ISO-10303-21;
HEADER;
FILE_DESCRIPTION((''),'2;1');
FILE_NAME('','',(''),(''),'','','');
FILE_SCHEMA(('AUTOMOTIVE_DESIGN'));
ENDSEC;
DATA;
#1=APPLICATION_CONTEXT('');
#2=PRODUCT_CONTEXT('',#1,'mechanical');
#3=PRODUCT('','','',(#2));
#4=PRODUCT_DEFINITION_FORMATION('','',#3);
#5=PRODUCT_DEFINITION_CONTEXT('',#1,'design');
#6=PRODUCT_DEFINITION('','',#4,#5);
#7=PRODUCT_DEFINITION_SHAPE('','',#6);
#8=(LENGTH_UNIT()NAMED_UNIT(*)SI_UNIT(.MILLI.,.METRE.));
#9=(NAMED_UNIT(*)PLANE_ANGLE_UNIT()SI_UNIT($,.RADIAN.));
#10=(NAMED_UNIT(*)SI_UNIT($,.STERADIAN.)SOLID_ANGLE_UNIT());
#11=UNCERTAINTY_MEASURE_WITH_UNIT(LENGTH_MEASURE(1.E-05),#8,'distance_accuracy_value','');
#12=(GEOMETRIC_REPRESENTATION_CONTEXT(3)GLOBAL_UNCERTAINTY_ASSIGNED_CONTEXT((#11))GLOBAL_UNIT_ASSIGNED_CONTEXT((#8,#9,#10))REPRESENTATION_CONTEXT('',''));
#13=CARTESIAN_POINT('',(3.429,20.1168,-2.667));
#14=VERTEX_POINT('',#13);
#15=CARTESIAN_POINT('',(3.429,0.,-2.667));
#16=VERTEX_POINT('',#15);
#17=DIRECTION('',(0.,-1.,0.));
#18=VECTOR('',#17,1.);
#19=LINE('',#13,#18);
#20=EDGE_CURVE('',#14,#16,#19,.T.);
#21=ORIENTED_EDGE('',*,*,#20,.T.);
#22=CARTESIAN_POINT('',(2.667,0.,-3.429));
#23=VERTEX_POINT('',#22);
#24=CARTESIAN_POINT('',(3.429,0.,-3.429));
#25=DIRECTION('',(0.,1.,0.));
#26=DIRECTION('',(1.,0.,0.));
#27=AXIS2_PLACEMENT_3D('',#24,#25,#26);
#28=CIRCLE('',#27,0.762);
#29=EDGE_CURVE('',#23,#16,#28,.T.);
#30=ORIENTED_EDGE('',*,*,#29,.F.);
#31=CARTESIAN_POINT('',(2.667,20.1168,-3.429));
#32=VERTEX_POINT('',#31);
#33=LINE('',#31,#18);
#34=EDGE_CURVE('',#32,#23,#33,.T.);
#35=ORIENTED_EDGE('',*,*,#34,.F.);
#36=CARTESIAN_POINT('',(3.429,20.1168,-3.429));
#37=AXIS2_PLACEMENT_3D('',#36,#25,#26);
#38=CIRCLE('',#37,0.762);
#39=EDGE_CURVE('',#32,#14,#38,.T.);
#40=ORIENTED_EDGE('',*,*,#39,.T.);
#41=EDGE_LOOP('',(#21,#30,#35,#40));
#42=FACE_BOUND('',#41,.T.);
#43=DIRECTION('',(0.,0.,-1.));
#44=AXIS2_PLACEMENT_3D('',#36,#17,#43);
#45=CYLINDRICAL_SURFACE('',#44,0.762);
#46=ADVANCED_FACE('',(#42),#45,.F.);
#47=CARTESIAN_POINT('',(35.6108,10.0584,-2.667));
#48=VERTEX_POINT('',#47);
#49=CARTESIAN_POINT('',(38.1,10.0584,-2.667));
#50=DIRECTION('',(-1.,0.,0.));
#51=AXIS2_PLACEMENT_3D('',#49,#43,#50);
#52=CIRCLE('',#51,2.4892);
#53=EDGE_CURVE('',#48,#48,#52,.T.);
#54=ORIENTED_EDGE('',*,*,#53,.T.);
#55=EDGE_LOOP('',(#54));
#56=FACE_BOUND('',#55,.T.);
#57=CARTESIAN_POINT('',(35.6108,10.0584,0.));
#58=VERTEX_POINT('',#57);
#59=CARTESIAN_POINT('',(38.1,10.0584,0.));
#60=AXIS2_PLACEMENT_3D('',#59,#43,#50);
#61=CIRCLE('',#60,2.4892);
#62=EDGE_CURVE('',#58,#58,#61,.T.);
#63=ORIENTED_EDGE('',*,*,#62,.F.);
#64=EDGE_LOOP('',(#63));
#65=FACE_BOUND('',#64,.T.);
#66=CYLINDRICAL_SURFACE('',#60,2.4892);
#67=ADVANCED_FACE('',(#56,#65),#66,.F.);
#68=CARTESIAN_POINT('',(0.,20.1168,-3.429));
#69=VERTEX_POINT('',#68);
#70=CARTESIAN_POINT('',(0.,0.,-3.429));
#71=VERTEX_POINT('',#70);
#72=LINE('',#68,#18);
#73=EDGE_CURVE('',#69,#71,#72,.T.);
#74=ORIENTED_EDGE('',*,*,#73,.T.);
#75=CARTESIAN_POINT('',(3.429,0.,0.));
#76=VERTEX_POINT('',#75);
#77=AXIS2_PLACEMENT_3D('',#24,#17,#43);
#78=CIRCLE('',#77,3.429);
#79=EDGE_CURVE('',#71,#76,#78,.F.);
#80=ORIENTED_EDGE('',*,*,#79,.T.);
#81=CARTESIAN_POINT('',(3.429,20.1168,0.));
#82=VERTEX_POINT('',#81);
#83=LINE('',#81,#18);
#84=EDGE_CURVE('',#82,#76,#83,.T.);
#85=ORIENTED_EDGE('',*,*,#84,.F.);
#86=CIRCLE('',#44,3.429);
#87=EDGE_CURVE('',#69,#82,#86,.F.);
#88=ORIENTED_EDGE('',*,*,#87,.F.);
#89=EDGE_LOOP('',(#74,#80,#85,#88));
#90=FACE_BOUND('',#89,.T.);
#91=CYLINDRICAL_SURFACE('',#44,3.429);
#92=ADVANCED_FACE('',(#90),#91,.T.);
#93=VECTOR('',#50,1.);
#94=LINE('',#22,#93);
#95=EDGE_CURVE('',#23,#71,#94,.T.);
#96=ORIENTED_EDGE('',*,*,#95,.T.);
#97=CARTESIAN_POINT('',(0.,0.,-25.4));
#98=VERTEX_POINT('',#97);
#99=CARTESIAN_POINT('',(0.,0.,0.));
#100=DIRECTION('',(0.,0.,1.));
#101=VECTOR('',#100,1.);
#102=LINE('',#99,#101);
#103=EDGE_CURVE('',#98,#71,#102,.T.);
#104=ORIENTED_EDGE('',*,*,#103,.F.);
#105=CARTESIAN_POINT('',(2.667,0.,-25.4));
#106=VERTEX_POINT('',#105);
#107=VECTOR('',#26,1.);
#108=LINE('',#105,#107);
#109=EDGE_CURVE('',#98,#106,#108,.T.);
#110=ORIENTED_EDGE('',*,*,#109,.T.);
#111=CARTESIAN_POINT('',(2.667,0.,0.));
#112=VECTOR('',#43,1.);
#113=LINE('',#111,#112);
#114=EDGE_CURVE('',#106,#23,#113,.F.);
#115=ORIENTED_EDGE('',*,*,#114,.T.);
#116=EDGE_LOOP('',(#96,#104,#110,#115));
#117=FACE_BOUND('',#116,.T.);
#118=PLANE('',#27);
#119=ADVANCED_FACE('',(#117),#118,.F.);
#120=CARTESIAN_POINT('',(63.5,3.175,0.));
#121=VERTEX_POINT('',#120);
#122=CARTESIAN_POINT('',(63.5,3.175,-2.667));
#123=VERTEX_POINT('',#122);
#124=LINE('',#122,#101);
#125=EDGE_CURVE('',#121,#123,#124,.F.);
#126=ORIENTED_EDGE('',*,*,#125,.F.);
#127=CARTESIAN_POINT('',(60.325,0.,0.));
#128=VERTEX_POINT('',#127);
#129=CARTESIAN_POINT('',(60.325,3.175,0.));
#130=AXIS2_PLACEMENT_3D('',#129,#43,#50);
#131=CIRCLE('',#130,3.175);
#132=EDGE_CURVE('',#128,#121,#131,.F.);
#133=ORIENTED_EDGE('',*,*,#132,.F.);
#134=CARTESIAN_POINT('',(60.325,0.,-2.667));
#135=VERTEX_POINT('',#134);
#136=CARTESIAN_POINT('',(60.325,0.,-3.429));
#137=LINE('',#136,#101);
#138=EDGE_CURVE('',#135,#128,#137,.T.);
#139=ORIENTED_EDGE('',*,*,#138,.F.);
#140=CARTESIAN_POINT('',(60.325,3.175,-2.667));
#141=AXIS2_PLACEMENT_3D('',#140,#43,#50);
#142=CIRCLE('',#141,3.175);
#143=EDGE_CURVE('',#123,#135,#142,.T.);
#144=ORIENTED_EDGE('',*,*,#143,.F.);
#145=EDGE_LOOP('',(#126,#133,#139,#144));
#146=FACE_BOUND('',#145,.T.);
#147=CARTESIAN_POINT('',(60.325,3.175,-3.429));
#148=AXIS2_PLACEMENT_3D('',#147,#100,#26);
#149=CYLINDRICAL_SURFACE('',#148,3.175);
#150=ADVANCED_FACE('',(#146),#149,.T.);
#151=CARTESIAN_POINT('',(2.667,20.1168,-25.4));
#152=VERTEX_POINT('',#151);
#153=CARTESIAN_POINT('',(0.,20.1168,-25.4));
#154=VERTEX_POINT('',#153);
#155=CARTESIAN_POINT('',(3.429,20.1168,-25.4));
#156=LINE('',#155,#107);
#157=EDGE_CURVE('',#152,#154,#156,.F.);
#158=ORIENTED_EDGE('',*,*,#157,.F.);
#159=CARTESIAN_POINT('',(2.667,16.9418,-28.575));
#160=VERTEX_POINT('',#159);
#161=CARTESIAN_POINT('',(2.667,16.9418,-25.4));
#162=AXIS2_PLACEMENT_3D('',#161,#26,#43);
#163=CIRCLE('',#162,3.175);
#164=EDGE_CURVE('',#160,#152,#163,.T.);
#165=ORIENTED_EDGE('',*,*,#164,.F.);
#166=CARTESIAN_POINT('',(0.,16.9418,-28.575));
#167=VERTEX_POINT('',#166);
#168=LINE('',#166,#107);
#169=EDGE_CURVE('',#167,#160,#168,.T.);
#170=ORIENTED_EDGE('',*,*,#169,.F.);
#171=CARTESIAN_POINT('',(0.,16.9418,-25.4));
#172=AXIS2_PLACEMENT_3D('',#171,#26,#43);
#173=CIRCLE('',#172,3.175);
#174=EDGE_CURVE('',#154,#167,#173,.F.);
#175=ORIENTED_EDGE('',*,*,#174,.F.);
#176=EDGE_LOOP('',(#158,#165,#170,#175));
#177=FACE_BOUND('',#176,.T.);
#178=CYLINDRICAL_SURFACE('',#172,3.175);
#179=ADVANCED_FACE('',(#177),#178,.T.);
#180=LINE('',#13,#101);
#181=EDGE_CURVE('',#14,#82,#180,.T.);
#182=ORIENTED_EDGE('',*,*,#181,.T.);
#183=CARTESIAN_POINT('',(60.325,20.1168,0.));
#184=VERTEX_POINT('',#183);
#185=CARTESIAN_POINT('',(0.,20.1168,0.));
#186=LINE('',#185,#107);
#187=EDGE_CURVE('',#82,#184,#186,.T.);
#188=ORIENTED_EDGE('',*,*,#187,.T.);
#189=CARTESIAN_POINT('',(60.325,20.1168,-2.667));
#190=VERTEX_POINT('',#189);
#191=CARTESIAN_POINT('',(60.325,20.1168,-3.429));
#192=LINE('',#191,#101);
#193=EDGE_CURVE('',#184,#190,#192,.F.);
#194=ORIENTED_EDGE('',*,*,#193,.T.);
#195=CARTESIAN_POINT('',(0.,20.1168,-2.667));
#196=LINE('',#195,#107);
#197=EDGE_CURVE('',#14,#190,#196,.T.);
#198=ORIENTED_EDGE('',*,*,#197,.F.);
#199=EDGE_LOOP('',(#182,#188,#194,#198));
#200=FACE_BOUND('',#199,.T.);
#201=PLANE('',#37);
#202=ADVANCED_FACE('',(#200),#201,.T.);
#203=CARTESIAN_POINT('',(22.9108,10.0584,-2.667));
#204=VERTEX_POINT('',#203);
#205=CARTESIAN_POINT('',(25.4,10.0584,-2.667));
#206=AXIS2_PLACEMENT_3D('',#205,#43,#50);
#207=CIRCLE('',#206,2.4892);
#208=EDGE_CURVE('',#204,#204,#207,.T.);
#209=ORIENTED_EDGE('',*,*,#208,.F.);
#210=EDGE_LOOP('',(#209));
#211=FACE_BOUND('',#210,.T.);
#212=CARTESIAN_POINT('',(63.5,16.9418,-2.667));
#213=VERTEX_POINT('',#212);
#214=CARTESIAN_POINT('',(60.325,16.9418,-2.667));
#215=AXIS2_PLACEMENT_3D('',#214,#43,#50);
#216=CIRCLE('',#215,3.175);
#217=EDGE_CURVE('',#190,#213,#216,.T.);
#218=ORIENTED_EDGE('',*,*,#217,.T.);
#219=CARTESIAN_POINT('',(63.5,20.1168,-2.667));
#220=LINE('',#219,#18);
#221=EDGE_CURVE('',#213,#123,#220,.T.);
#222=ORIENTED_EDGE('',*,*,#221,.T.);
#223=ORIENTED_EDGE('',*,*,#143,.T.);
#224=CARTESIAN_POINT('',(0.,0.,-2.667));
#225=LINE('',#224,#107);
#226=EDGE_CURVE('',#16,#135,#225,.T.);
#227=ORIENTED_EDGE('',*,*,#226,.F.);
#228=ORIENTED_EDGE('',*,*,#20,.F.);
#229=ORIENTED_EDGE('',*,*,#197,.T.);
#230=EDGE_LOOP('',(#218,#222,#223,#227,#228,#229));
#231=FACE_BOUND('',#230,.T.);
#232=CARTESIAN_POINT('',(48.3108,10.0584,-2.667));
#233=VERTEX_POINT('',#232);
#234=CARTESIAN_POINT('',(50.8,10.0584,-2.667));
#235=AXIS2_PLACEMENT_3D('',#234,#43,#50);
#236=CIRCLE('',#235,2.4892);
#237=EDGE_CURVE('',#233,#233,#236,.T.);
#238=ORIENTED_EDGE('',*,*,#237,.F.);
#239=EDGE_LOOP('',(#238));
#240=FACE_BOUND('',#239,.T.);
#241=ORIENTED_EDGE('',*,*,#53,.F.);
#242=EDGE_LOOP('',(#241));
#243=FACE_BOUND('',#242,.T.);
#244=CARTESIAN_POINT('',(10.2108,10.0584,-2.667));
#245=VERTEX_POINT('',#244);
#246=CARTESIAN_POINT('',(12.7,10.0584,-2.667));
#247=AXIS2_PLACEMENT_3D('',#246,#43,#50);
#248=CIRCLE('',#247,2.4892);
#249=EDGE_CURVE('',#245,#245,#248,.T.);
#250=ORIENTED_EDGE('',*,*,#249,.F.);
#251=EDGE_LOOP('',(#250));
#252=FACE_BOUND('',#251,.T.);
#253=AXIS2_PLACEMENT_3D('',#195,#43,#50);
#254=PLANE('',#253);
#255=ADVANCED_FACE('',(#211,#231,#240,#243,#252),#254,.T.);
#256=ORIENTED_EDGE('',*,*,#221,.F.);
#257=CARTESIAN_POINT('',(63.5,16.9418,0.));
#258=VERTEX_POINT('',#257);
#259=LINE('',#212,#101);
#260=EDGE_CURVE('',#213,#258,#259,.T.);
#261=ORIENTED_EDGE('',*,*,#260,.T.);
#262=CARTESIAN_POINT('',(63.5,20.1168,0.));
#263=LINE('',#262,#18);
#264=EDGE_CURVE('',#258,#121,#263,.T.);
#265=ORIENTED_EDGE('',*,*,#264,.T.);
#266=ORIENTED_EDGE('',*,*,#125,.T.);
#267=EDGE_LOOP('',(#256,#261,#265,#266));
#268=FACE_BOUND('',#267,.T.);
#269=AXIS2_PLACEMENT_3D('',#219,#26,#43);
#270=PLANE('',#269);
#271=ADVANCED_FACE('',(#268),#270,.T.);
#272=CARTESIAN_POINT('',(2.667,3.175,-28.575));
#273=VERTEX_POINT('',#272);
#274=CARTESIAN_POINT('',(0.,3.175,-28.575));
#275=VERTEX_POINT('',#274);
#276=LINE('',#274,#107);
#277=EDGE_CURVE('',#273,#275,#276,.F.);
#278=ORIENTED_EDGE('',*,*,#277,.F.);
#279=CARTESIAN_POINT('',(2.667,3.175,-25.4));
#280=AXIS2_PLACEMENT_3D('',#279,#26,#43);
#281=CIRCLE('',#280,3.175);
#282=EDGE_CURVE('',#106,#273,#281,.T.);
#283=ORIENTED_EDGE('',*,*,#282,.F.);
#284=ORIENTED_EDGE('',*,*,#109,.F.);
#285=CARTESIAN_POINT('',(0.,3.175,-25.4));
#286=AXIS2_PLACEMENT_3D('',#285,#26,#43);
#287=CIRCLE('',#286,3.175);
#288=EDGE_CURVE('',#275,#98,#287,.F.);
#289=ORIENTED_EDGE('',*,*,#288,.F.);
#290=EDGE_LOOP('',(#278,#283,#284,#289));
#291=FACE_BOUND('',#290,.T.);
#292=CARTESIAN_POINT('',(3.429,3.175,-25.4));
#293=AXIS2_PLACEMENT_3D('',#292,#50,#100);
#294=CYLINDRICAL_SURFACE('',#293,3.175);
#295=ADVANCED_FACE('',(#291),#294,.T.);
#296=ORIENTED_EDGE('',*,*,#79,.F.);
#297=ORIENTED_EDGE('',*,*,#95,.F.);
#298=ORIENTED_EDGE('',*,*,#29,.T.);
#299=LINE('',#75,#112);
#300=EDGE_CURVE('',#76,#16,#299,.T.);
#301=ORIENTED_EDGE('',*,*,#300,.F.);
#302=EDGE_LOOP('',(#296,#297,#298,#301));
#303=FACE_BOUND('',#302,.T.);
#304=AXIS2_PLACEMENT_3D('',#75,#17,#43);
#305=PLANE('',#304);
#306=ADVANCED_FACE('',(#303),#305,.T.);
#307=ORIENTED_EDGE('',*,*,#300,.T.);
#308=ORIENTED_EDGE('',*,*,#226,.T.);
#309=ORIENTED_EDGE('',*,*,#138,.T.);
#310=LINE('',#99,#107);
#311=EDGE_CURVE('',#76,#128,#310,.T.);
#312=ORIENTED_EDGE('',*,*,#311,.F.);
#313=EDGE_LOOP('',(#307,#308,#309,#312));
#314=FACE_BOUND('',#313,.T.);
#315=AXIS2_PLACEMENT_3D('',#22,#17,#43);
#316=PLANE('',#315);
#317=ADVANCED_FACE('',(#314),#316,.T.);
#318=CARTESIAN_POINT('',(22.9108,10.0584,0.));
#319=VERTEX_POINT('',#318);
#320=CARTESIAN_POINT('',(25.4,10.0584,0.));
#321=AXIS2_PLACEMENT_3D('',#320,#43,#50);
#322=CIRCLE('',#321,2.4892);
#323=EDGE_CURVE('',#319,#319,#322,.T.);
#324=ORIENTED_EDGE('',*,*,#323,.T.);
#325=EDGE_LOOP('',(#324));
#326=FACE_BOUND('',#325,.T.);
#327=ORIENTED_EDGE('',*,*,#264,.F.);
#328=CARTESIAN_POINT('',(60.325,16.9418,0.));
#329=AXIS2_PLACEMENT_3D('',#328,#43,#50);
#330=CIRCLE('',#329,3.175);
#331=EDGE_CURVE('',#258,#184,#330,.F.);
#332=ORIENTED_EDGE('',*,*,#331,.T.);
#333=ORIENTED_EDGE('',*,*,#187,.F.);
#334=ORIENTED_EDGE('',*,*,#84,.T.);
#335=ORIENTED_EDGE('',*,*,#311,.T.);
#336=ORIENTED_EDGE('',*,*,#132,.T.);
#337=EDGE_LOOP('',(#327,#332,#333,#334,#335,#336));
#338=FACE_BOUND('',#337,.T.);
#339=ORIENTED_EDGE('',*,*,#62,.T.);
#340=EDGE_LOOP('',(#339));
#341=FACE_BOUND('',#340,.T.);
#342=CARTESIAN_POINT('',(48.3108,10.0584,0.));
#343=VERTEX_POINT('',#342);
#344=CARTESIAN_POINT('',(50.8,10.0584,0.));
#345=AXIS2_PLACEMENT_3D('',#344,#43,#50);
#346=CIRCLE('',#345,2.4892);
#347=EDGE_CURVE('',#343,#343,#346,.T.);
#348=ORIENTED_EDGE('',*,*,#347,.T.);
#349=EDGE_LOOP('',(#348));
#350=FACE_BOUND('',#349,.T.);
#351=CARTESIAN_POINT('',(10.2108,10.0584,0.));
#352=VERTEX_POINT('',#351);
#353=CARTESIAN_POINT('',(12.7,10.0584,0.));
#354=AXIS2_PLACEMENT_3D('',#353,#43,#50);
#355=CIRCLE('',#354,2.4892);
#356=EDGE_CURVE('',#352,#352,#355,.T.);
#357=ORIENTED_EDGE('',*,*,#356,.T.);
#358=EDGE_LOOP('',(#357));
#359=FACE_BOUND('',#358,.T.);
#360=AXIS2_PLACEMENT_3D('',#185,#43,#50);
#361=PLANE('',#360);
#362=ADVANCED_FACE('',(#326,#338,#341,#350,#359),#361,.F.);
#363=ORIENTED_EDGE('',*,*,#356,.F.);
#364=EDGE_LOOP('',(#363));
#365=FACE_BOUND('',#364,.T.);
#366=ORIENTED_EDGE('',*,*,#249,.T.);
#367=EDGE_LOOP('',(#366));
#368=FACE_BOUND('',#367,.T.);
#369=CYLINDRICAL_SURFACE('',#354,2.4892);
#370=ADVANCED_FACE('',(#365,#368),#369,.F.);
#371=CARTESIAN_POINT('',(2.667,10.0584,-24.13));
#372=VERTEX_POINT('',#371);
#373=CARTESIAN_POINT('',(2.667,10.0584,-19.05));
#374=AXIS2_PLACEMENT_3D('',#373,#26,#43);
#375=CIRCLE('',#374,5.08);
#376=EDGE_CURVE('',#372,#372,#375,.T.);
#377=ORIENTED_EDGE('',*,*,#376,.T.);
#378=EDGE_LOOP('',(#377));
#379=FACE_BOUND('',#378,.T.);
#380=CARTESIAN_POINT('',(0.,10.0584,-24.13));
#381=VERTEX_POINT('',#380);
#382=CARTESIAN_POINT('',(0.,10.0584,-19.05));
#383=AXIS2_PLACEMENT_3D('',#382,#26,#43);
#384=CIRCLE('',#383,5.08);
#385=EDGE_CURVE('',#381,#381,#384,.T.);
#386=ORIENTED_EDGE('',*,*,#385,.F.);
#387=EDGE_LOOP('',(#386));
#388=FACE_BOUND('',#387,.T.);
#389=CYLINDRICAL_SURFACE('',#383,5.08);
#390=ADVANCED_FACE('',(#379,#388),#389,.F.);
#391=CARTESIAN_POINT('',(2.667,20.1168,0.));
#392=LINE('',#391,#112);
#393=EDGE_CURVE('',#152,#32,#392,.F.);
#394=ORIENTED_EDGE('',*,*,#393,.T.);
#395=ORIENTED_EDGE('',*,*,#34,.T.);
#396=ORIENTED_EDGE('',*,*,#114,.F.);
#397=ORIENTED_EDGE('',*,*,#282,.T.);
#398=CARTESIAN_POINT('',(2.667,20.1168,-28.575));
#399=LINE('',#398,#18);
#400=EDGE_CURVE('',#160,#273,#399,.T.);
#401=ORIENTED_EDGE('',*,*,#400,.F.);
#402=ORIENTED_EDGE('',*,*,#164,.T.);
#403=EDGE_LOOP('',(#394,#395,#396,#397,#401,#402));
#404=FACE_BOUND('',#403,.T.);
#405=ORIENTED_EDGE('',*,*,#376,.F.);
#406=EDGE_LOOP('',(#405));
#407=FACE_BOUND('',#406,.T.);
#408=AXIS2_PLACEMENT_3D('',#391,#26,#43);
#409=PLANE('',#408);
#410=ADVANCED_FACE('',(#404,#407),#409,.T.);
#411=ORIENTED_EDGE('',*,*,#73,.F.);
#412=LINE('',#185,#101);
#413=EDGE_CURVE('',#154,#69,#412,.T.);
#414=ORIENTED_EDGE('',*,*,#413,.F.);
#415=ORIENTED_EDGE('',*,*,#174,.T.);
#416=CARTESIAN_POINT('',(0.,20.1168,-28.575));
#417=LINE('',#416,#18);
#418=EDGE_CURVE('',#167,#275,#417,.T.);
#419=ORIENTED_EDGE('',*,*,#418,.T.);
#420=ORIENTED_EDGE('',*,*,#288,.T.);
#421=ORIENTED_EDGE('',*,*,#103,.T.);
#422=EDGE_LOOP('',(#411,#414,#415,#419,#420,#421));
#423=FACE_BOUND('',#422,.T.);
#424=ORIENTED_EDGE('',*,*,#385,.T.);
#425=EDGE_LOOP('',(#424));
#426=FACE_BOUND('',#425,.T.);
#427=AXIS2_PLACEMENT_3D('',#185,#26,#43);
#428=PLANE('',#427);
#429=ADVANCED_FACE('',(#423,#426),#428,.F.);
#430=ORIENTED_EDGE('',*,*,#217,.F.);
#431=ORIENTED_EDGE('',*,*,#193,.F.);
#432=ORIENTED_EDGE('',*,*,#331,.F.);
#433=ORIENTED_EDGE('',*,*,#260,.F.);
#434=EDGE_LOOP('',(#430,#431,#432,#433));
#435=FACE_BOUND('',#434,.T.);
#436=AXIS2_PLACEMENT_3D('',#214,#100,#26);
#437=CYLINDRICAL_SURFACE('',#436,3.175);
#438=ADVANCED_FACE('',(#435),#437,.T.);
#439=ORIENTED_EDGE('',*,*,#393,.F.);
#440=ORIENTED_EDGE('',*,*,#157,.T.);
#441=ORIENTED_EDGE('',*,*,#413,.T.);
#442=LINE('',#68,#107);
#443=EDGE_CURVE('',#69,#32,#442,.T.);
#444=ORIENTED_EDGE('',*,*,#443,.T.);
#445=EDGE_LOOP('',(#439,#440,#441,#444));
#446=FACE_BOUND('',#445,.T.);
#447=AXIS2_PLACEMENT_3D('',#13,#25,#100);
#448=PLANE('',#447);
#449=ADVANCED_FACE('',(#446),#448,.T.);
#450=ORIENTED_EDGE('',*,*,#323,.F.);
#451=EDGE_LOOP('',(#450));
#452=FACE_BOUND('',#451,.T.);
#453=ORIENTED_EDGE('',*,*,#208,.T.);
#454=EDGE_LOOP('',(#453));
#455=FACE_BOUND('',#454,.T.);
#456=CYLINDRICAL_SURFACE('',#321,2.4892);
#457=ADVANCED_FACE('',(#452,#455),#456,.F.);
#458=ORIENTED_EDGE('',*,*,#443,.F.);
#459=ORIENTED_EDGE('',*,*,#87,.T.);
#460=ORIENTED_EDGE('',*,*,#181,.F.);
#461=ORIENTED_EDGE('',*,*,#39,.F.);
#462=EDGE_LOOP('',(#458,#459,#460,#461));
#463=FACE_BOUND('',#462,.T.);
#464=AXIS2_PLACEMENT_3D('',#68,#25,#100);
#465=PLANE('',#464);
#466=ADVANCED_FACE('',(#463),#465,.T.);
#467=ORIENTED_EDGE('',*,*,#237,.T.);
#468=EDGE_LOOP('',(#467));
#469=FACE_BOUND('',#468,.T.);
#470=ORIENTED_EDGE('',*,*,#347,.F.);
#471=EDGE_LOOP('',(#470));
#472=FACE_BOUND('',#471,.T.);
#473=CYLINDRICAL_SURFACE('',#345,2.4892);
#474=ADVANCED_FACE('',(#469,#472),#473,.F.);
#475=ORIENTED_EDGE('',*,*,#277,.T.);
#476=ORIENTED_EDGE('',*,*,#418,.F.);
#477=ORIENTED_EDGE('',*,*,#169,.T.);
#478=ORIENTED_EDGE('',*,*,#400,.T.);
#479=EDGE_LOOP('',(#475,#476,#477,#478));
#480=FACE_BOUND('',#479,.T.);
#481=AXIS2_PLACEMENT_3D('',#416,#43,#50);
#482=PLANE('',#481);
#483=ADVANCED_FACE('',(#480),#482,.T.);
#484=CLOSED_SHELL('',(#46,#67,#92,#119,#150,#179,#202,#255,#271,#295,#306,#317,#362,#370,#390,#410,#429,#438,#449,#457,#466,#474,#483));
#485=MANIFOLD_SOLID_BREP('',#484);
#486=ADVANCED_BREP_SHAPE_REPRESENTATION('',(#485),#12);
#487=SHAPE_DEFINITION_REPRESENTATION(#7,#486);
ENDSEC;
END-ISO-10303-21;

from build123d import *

# Parameters (mm, degrees)
BASE_FLANGE1_DEPTH = 20.1168
SKETCH6_R          = 2.4892
CUT_EXTRUDE1_DEPTH = 72.471393622
SKETCH7_R          = 5.08
CUT_EXTRUDE2_DEPTH = 71.156041481
FILLET1_R          = 3.175


# Read off the part's stored shape, not the designer's step: Base-Flange1
with BuildPart() as part:
    # Base-Flange1 outline → Base-Flange1 (new body)
    with BuildSketch(Plane(origin=(0, 0, 0), x_dir=(1, 0, 0), z_dir=(0, 1, 0))):
        with BuildLine():
            Line((3.429, 0), (63.5, 0))
            Line((63.5, 0), (63.5, 2.667))
            Line((63.5, 2.667), (3.429, 2.667))
            ThreePointArc((3.429, 2.667), (2.890184633, 2.890184633), (2.667, 3.429))
            Line((2.667, 3.429), (2.667, 28.575))
            Line((2.667, 28.575), (0, 28.575))
            Line((0, 28.575), (0, 3.429))
            ThreePointArc((0, 3.429), (1.004330847, 1.004330847), (3.429, 0))
        make_face()
    extrude(amount=BASE_FLANGE1_DEPTH)

    # Sketch6 → Cut-Extrude1 (cut, through all)
    with BuildSketch(Plane(origin=(0, 0, -2.667), x_dir=(-1, 0, 0), z_dir=(0, 0, -1))):
        with Locations((-50.8, 10.0584)):
            Circle(SKETCH6_R)
        with Locations((-38.1, 10.0584)):
            Circle(SKETCH6_R)
        with Locations((-25.4, 10.0584)):
            Circle(SKETCH6_R)
        with Locations((-12.7, 10.0584)):
            Circle(SKETCH6_R)
    extrude(amount=-CUT_EXTRUDE1_DEPTH, mode=Mode.SUBTRACT)

    # Sketch7 → Cut-Extrude2 (cut, through all)
    with BuildSketch(Plane(origin=(2.667, 0, 0), x_dir=(0, 0, -1), z_dir=(1, 0, 0))):
        with Locations((19.05, 10.0584)):
            Circle(SKETCH7_R)
    extrude(amount=-CUT_EXTRUDE2_DEPTH, mode=Mode.SUBTRACT)

    # Fillet1
    fillet1_edges = [part.edges().sort_by_distance(p)[0] for p in [
        (1.3335, 20.1168, -28.575),
        (1.3335, 0, -28.575),
        (63.5, 20.1168, -1.3335),
        (63.5, 0, -1.3335),
    ]]
    fillet(fillet1_edges, radius=FILLET1_R)


solid = part.part
